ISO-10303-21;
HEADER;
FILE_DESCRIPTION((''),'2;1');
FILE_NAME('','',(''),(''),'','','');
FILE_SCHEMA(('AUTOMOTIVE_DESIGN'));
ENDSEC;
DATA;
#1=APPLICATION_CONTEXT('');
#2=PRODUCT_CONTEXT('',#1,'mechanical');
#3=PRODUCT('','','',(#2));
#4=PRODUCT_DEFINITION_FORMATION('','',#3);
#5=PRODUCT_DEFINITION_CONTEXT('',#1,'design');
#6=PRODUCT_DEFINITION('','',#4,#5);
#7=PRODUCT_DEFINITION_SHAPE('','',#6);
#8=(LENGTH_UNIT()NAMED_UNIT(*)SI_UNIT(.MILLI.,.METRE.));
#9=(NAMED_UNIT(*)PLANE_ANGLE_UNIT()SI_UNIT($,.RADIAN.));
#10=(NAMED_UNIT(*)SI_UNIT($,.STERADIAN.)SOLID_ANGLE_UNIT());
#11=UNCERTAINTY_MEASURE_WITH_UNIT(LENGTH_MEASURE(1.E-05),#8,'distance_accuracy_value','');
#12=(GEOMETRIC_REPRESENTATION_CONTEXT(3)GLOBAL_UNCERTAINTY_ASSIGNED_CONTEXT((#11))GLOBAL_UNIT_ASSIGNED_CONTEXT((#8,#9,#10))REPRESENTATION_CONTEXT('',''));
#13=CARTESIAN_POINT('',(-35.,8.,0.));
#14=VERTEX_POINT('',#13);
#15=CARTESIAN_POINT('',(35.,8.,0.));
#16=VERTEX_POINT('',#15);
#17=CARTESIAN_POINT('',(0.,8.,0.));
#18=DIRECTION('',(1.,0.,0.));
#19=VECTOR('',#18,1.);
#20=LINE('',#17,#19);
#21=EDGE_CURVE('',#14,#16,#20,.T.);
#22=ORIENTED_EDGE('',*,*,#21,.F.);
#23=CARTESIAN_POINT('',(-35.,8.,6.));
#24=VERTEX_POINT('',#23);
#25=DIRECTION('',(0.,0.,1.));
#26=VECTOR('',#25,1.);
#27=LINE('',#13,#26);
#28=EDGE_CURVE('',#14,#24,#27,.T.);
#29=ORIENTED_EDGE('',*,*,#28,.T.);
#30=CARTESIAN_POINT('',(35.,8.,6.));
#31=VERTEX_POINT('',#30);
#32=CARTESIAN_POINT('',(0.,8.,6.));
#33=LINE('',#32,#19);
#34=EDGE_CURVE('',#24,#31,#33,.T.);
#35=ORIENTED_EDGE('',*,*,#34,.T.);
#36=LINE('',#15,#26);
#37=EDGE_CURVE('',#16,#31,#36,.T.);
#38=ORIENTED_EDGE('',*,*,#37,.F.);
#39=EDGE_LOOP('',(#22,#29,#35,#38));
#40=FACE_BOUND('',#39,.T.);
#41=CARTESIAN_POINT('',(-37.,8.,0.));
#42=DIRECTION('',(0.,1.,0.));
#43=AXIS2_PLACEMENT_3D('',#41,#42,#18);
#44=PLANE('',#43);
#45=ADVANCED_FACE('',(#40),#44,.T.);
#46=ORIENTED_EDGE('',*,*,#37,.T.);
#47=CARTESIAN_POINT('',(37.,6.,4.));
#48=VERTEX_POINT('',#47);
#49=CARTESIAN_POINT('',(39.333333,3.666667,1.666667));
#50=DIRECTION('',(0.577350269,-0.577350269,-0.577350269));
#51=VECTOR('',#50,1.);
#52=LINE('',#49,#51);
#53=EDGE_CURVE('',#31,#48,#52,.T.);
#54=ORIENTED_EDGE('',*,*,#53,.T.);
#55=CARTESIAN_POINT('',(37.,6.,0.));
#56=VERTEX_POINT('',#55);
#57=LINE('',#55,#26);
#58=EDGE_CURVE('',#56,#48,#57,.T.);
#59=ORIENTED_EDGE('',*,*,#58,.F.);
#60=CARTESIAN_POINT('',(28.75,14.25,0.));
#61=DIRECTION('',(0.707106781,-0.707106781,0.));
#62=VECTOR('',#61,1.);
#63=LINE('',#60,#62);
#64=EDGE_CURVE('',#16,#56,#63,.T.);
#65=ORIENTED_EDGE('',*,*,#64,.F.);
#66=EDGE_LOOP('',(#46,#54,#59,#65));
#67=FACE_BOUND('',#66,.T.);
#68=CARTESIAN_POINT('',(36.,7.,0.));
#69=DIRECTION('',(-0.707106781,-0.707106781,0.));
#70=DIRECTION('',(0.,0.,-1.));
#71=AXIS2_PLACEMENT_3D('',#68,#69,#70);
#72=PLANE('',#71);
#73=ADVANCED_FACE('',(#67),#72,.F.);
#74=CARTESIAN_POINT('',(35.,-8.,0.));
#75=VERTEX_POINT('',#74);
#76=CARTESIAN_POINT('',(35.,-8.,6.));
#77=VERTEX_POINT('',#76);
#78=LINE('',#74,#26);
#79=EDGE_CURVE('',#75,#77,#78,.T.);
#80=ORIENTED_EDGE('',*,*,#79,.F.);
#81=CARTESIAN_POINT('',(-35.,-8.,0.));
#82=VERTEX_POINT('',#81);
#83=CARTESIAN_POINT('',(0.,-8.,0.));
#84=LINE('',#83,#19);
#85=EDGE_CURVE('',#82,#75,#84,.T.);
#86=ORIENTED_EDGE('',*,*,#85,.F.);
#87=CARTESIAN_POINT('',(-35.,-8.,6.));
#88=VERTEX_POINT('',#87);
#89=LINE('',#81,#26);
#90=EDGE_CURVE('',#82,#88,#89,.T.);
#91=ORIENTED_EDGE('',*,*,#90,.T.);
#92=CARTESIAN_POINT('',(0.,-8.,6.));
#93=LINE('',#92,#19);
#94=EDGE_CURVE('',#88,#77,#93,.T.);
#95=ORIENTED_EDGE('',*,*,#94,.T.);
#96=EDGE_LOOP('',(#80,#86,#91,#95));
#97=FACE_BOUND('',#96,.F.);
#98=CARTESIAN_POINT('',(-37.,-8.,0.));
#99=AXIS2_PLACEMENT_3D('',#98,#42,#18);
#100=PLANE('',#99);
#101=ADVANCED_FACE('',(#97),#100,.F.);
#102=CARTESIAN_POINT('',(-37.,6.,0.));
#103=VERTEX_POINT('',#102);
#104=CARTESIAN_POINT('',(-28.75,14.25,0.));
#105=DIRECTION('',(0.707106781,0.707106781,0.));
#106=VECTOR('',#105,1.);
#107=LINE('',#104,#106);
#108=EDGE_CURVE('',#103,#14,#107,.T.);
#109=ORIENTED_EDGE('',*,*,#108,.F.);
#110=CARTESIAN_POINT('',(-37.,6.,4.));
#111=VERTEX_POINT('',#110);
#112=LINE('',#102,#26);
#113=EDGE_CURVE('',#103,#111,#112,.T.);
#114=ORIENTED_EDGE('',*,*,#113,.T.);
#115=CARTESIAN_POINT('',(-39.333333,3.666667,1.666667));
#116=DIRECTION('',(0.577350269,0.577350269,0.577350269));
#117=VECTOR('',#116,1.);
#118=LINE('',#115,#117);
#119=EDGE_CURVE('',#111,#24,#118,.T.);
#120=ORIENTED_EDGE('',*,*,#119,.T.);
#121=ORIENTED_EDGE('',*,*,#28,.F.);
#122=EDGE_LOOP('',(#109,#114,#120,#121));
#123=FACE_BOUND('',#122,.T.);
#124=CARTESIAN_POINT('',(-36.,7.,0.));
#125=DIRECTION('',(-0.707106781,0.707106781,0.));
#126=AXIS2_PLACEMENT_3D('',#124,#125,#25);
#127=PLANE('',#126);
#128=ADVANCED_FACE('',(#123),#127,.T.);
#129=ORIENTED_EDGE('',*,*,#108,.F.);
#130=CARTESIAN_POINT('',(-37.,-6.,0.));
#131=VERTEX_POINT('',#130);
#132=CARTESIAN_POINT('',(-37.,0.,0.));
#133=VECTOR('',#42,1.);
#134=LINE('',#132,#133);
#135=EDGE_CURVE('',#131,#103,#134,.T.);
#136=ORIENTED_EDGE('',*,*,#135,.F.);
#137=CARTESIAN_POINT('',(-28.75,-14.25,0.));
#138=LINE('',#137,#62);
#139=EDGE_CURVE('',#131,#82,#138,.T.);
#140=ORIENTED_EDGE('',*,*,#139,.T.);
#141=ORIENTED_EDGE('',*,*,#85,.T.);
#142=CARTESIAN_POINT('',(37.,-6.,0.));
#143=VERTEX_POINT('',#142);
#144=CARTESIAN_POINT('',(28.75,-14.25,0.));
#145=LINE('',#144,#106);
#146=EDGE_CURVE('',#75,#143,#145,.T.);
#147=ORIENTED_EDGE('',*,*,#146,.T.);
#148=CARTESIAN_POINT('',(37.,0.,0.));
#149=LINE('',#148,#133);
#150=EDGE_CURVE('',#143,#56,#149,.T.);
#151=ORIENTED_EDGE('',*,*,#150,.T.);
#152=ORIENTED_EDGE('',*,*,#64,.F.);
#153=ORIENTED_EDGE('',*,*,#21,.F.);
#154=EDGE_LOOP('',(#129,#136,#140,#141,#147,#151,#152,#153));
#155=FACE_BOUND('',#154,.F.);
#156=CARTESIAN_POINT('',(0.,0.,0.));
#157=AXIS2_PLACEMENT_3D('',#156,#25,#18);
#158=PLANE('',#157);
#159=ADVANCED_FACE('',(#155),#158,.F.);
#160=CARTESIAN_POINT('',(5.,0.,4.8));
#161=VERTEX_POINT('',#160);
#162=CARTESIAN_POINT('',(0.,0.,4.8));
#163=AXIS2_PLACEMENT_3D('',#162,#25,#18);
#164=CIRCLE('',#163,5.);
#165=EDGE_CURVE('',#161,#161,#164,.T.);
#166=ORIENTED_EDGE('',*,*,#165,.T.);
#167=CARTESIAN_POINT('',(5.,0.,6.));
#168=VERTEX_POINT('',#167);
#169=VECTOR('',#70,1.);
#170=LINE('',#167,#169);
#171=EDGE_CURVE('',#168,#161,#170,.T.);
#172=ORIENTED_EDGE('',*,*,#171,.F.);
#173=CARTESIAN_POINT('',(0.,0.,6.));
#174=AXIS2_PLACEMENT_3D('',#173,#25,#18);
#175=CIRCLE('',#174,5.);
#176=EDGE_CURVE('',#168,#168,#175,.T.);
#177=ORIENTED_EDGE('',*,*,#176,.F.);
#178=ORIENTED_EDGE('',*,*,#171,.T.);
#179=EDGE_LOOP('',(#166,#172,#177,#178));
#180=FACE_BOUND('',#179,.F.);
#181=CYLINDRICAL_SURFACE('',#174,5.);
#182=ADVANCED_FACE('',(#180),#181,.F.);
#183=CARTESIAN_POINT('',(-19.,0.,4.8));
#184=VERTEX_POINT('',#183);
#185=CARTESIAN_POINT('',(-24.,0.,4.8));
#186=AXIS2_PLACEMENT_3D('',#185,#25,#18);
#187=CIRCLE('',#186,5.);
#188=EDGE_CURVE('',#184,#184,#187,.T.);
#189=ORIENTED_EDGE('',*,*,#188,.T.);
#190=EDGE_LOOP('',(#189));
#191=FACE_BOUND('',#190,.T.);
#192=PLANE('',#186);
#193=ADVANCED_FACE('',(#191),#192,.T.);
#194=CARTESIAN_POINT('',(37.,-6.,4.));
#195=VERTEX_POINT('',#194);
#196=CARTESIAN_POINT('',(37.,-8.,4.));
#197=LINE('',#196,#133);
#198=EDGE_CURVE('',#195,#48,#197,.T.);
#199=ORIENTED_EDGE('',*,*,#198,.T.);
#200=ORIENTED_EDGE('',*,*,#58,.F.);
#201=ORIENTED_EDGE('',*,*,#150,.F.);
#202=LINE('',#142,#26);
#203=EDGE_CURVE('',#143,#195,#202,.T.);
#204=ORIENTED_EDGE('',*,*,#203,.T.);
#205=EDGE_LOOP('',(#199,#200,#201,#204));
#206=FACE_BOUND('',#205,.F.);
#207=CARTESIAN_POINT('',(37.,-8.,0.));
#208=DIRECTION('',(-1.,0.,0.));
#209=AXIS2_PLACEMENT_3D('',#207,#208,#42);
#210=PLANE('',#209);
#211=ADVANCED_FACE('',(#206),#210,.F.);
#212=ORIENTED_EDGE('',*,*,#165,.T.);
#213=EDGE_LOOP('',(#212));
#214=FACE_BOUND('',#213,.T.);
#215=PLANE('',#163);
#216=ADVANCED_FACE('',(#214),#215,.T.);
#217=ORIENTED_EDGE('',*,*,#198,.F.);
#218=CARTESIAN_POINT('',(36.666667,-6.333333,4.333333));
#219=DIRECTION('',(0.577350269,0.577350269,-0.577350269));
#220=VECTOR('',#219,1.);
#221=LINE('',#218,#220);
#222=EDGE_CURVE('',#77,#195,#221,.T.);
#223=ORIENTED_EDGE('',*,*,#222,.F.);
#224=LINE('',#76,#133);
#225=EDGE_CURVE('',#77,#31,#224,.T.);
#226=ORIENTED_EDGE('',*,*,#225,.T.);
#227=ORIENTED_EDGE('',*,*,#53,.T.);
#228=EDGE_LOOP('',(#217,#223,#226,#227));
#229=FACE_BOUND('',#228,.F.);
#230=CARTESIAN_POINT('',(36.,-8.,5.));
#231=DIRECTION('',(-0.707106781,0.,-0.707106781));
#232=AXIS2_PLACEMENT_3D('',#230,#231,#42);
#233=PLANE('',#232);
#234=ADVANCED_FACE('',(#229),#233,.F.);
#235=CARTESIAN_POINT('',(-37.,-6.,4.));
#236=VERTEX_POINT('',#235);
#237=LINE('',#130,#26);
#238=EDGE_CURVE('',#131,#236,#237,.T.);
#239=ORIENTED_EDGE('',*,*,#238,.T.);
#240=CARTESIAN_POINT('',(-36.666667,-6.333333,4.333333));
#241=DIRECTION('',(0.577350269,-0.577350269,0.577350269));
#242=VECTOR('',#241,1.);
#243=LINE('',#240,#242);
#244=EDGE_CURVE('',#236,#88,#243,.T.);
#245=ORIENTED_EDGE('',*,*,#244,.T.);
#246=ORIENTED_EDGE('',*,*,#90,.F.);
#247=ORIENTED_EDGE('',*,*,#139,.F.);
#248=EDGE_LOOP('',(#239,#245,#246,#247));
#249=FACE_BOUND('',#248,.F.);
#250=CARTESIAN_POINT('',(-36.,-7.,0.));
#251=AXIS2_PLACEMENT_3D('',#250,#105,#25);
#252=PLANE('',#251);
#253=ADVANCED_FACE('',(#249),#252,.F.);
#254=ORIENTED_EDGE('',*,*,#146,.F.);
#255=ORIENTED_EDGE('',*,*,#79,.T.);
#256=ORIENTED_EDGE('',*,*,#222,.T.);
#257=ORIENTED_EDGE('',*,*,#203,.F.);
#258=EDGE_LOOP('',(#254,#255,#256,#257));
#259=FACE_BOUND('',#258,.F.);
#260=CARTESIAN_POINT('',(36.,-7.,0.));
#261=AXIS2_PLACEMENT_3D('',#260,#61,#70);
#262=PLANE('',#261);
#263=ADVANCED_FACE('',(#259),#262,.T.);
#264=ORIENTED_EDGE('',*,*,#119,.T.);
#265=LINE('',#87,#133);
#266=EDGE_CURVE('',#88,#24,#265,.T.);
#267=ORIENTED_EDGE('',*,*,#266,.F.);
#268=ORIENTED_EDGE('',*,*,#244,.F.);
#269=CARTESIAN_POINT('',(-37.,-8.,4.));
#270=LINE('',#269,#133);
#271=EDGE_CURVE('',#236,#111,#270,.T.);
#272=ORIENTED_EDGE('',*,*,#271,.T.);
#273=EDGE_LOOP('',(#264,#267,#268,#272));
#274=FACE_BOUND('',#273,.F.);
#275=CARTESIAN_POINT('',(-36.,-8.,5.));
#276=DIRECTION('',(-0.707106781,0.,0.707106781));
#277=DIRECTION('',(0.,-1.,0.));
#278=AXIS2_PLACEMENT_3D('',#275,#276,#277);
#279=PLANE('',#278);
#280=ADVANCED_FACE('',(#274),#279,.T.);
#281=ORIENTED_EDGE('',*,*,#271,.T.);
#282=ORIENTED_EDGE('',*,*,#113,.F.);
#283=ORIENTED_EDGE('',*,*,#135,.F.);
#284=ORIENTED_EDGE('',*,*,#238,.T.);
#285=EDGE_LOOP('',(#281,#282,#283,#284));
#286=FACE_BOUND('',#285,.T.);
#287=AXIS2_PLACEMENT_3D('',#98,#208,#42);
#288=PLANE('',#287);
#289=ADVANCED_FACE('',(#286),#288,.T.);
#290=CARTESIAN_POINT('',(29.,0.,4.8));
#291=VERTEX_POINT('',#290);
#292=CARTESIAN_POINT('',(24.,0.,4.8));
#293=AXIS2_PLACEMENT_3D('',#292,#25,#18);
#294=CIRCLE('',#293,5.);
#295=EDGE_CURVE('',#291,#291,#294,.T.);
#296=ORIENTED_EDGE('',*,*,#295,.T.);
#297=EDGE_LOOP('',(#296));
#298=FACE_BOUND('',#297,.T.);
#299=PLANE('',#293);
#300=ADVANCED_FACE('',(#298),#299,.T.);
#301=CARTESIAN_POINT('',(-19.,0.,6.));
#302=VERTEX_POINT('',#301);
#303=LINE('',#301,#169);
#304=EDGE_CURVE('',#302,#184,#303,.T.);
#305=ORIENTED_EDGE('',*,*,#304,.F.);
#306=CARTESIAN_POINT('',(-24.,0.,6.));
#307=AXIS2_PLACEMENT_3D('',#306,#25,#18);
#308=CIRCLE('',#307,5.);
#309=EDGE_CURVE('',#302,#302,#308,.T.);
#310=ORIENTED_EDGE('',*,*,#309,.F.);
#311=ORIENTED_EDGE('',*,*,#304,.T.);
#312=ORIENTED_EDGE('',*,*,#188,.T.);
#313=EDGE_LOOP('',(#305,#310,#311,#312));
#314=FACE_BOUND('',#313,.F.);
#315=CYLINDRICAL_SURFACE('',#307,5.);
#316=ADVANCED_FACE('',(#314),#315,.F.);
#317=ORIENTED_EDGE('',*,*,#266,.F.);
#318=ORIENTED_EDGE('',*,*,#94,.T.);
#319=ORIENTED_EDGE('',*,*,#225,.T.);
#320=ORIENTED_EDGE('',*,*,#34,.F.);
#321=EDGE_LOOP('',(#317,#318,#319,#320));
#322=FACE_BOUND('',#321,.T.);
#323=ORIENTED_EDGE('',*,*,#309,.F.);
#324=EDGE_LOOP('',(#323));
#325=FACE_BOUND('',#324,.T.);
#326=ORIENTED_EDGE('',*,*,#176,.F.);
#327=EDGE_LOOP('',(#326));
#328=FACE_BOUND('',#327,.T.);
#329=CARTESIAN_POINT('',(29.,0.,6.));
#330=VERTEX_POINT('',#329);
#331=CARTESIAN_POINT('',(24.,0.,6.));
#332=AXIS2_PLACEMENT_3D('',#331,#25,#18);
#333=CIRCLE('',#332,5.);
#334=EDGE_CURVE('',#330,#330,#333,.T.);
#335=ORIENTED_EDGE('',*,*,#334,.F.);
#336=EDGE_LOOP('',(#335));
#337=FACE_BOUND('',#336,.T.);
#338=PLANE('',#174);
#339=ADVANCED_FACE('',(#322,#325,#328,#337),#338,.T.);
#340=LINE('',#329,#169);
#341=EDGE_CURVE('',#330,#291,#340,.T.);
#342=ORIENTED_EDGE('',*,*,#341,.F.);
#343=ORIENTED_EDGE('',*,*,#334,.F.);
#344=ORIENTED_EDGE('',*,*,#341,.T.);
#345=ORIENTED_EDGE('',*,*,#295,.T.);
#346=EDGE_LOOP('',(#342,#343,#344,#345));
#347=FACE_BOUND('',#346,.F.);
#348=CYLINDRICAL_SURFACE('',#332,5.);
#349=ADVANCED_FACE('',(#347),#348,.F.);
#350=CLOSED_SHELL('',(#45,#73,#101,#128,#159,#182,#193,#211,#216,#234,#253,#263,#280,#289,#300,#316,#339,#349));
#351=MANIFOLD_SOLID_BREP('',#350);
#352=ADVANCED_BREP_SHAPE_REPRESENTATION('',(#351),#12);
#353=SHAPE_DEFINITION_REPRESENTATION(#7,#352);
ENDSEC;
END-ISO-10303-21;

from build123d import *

# Parameters (mm, degrees)
F0_W     = 74
F0_H     = 16
F1_DEPTH = 6
F2_R     = 5
F3_DEPTH = 1.2
F4_SIZE  = 2


# Not quite as in the source:
# - a feature of the source that left no trace in its solid (it failed there, or was rolled back) is left out


with BuildPart() as f1:
    # F0 (on Top) → F1 (new body)
    with BuildSketch(Plane.XY):
        Rectangle(F0_W, F0_H)
    extrude(amount=F1_DEPTH)

    # F2 (on face) → F3 (cut)
    with BuildSketch(Plane.XY.offset(6)):
        with Locations((-24, 0)):
            Circle(F2_R)
        Circle(F2_R)
        with Locations((24, 0)):
            Circle(F2_R)
    extrude(amount=-F3_DEPTH, mode=Mode.SUBTRACT)

    # F4
    f4_edges = [f1.edges().sort_by_distance(p)[0] for p in [
        (-37, 8, 3),
        (-37, -8, 3),
        (37, -8, 3),
        (37, 8, 3),
        (-37, 0, 6),
        (37, 0, 6),
    ]]
    chamfer(f4_edges, length=F4_SIZE)


solid = f1.part
